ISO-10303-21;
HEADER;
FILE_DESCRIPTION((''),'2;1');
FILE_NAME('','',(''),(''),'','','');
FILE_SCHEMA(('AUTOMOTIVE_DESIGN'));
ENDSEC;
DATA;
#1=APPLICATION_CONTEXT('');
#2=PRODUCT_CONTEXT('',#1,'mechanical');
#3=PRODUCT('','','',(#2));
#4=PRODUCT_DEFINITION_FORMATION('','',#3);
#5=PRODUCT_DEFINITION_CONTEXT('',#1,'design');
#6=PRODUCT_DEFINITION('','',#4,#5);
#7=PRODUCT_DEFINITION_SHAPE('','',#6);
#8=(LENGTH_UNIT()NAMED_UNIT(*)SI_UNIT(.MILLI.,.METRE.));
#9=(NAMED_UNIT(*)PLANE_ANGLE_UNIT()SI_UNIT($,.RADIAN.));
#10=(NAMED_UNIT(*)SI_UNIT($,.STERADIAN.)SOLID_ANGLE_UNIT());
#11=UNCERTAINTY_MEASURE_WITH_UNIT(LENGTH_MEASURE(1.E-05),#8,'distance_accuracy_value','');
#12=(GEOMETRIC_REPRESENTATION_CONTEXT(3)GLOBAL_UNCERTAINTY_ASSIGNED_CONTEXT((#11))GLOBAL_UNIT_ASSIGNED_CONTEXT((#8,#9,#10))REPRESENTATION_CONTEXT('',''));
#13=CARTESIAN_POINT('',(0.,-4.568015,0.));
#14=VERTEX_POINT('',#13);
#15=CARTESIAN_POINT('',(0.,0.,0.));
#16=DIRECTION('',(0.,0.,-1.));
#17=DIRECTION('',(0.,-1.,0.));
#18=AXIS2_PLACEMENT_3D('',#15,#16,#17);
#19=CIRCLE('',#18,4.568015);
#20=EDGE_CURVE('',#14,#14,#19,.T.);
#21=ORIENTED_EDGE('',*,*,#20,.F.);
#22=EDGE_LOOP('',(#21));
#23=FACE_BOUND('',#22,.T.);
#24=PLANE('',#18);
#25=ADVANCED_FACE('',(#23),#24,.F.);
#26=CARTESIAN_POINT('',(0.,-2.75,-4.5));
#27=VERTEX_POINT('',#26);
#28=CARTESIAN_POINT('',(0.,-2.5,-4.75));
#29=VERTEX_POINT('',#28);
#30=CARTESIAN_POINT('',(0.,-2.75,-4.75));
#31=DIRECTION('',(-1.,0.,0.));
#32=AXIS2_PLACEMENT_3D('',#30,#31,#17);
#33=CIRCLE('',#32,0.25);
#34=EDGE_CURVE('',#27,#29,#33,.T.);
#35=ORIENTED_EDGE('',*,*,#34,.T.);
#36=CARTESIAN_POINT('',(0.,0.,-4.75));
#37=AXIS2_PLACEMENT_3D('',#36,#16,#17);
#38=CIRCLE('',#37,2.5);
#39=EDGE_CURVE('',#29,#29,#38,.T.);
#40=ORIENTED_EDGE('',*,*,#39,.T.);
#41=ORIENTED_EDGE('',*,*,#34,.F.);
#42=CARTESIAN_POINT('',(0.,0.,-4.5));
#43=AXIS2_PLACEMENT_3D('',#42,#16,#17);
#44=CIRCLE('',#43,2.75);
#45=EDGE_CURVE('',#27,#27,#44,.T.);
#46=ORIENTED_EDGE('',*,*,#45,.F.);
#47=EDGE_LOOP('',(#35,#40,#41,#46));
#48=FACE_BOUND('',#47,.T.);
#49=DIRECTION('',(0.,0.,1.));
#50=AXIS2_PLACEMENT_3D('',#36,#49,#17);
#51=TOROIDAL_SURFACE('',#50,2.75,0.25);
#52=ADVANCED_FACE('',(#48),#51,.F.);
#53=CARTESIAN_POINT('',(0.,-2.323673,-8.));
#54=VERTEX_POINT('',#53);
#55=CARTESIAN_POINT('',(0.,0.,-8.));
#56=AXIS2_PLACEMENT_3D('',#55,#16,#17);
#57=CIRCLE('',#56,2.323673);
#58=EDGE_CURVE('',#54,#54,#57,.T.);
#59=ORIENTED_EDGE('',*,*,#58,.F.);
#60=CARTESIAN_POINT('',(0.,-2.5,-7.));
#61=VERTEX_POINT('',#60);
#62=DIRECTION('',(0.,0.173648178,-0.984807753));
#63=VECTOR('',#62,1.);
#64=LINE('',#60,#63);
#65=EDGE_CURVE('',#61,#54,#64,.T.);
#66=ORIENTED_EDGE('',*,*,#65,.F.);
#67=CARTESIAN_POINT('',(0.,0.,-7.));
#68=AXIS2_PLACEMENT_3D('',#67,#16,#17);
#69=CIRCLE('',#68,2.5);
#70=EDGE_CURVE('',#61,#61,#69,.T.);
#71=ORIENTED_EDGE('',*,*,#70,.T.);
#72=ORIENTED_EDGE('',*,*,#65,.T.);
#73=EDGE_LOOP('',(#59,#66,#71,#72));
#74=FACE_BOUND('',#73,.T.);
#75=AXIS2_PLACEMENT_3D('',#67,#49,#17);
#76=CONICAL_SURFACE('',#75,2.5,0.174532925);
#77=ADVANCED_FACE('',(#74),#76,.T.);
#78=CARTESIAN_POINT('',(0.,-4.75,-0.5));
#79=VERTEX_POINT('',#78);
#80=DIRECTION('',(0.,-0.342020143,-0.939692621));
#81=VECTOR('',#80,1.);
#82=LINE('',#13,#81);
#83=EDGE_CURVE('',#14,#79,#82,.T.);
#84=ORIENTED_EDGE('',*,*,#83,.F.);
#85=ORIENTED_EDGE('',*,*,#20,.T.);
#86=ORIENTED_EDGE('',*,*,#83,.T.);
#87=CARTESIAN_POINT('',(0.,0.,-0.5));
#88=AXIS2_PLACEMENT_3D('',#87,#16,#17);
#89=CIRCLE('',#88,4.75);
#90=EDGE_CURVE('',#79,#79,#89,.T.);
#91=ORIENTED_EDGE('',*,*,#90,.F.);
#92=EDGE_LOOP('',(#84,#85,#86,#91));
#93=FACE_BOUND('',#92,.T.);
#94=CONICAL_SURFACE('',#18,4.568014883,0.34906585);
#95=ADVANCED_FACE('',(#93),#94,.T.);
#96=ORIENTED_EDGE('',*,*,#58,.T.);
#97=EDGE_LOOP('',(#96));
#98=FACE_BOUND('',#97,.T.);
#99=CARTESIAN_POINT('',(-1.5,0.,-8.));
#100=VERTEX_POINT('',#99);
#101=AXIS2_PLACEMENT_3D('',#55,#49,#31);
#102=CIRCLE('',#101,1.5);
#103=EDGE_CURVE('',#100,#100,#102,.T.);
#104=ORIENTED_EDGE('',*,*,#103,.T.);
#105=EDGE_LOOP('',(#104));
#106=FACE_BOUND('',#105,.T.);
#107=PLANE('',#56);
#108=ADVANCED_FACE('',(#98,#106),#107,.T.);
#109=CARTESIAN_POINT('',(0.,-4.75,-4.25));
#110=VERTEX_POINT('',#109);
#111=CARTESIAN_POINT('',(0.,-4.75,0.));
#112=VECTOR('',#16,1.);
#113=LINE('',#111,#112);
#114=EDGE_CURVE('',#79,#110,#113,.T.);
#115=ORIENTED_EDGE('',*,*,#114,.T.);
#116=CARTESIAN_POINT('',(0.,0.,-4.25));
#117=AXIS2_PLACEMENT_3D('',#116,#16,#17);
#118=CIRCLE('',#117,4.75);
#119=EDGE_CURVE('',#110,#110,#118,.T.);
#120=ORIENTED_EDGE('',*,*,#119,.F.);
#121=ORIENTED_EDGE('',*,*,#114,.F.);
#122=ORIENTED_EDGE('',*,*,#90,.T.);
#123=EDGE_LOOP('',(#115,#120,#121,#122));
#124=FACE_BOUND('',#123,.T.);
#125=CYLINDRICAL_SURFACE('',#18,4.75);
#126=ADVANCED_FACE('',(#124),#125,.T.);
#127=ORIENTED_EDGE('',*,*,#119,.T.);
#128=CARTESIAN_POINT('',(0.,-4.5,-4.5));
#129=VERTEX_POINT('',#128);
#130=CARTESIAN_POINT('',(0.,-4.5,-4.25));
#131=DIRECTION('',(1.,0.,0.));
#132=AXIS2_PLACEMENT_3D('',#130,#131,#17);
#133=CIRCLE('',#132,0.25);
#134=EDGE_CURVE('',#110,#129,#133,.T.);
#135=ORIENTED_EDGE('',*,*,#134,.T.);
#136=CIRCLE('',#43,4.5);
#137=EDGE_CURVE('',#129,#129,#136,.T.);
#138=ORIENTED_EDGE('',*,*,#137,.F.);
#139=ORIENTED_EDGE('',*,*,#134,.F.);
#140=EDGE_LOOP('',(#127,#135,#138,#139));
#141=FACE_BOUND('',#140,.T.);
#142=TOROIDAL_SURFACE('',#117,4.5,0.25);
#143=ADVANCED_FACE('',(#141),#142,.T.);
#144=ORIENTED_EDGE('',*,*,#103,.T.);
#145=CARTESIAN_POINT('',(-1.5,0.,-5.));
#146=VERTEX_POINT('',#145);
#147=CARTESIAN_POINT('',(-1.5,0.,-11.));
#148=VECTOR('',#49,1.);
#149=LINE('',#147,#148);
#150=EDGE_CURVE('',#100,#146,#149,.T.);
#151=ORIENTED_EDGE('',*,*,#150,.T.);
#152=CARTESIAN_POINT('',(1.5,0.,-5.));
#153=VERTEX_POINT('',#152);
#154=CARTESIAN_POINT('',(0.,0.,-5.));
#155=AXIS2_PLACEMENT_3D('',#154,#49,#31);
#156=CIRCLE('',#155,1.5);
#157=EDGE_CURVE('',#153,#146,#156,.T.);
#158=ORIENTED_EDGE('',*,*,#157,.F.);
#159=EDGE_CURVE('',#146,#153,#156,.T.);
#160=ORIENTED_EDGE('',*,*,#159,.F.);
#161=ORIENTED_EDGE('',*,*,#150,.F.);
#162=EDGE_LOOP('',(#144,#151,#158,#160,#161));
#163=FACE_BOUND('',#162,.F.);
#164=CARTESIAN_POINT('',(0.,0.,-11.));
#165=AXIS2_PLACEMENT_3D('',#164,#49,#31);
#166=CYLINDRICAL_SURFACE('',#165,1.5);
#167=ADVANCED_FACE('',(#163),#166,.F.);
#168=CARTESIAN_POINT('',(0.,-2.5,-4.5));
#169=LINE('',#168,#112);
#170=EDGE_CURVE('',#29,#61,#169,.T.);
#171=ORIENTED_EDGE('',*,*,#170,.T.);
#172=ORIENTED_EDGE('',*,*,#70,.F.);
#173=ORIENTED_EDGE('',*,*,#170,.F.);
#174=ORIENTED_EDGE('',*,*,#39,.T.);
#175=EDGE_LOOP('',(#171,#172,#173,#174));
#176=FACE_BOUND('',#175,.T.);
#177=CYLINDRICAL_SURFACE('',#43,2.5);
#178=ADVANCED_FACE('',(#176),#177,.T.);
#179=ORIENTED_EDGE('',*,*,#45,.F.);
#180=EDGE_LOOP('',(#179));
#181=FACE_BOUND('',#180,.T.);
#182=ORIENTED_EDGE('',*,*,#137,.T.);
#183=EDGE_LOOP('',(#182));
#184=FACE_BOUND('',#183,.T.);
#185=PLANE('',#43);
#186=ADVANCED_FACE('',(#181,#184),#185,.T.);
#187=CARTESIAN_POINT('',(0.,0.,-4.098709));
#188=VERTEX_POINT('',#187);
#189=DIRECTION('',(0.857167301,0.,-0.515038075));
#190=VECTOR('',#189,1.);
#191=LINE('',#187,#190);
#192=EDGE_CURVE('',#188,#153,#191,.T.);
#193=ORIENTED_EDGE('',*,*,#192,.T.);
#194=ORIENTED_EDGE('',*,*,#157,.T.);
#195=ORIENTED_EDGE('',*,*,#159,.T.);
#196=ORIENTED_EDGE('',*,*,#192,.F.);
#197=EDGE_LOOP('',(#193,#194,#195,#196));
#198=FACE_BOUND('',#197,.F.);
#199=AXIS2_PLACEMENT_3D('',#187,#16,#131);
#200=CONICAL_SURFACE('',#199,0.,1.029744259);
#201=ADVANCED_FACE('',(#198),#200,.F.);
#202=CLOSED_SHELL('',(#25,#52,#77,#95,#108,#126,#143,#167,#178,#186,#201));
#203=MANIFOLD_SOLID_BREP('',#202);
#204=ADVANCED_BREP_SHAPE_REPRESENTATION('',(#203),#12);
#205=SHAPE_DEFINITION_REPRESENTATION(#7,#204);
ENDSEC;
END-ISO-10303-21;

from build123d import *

# Parameters (mm, degrees)
F3_R     = 0.25
F4_SIZE2 = 0.1763269807
F4_SIZE  = 1
F6_D     = 3
F6_DEPTH = 3
F6_TIP   = 0.9012909285


# Not quite as in the source:
# - a fillet or chamfer that OpenCascade refuses, or shapes differently, is made with other operations: its cross-section is extruded or revolved along the edge and cut away or added


with BuildPart() as f1:
    # F0 (on Right) → F1 (revolve)
    with BuildSketch(Plane.YZ):
        Polygon((0, 0), (-4.75, 0), (-4.75, -4.5), (-2.5, -4.5), (-2.5, -8), (0, -8), align=None)
    revolve(axis=Axis((0, 0, -4), (0, 0, -1)))

    # F2: chamfer of 0.5 x 0.1819851171 on 1 edges, made by hand

    # F2_s1 → F2_t2 (revolve, cut)
    with BuildSketch(Plane.YZ):
        Polygon((-4.5680148829, 0), (-4.75, -0.5), (-4.75, 0), align=None)
    revolve(axis=Axis((0, 0, 0), (0, 0, -1)), mode=Mode.SUBTRACT)

    # F3
    f3_edges = [f1.edges().sort_by_distance(p)[0] for p in [
        (0, 4.75, -4.5),
        (0, 2.5, -4.5),
    ]]
    fillet(f3_edges, radius=F3_R)

    # F4
    f4_edges = [f1.edges().sort_by_distance(p)[0] for p in [
        (0, 2.5, -8),
    ]]
    chamfer(f4_edges, length=F4_SIZE, length2=F4_SIZE2)

    # F6
    with Locations(Plane(origin=(0, 0, -8), x_dir=(1, 0, 0), z_dir=(0, 0, -1))):
        with Locations((0, 0)):
            Hole(F6_D / 2, depth=F6_DEPTH)
            with Locations((0, 0, -(F6_DEPTH + F6_TIP / 2))):  # 118° drill point
                Cone(0, F6_D / 2, F6_TIP, mode=Mode.SUBTRACT)


solid = f1.part
